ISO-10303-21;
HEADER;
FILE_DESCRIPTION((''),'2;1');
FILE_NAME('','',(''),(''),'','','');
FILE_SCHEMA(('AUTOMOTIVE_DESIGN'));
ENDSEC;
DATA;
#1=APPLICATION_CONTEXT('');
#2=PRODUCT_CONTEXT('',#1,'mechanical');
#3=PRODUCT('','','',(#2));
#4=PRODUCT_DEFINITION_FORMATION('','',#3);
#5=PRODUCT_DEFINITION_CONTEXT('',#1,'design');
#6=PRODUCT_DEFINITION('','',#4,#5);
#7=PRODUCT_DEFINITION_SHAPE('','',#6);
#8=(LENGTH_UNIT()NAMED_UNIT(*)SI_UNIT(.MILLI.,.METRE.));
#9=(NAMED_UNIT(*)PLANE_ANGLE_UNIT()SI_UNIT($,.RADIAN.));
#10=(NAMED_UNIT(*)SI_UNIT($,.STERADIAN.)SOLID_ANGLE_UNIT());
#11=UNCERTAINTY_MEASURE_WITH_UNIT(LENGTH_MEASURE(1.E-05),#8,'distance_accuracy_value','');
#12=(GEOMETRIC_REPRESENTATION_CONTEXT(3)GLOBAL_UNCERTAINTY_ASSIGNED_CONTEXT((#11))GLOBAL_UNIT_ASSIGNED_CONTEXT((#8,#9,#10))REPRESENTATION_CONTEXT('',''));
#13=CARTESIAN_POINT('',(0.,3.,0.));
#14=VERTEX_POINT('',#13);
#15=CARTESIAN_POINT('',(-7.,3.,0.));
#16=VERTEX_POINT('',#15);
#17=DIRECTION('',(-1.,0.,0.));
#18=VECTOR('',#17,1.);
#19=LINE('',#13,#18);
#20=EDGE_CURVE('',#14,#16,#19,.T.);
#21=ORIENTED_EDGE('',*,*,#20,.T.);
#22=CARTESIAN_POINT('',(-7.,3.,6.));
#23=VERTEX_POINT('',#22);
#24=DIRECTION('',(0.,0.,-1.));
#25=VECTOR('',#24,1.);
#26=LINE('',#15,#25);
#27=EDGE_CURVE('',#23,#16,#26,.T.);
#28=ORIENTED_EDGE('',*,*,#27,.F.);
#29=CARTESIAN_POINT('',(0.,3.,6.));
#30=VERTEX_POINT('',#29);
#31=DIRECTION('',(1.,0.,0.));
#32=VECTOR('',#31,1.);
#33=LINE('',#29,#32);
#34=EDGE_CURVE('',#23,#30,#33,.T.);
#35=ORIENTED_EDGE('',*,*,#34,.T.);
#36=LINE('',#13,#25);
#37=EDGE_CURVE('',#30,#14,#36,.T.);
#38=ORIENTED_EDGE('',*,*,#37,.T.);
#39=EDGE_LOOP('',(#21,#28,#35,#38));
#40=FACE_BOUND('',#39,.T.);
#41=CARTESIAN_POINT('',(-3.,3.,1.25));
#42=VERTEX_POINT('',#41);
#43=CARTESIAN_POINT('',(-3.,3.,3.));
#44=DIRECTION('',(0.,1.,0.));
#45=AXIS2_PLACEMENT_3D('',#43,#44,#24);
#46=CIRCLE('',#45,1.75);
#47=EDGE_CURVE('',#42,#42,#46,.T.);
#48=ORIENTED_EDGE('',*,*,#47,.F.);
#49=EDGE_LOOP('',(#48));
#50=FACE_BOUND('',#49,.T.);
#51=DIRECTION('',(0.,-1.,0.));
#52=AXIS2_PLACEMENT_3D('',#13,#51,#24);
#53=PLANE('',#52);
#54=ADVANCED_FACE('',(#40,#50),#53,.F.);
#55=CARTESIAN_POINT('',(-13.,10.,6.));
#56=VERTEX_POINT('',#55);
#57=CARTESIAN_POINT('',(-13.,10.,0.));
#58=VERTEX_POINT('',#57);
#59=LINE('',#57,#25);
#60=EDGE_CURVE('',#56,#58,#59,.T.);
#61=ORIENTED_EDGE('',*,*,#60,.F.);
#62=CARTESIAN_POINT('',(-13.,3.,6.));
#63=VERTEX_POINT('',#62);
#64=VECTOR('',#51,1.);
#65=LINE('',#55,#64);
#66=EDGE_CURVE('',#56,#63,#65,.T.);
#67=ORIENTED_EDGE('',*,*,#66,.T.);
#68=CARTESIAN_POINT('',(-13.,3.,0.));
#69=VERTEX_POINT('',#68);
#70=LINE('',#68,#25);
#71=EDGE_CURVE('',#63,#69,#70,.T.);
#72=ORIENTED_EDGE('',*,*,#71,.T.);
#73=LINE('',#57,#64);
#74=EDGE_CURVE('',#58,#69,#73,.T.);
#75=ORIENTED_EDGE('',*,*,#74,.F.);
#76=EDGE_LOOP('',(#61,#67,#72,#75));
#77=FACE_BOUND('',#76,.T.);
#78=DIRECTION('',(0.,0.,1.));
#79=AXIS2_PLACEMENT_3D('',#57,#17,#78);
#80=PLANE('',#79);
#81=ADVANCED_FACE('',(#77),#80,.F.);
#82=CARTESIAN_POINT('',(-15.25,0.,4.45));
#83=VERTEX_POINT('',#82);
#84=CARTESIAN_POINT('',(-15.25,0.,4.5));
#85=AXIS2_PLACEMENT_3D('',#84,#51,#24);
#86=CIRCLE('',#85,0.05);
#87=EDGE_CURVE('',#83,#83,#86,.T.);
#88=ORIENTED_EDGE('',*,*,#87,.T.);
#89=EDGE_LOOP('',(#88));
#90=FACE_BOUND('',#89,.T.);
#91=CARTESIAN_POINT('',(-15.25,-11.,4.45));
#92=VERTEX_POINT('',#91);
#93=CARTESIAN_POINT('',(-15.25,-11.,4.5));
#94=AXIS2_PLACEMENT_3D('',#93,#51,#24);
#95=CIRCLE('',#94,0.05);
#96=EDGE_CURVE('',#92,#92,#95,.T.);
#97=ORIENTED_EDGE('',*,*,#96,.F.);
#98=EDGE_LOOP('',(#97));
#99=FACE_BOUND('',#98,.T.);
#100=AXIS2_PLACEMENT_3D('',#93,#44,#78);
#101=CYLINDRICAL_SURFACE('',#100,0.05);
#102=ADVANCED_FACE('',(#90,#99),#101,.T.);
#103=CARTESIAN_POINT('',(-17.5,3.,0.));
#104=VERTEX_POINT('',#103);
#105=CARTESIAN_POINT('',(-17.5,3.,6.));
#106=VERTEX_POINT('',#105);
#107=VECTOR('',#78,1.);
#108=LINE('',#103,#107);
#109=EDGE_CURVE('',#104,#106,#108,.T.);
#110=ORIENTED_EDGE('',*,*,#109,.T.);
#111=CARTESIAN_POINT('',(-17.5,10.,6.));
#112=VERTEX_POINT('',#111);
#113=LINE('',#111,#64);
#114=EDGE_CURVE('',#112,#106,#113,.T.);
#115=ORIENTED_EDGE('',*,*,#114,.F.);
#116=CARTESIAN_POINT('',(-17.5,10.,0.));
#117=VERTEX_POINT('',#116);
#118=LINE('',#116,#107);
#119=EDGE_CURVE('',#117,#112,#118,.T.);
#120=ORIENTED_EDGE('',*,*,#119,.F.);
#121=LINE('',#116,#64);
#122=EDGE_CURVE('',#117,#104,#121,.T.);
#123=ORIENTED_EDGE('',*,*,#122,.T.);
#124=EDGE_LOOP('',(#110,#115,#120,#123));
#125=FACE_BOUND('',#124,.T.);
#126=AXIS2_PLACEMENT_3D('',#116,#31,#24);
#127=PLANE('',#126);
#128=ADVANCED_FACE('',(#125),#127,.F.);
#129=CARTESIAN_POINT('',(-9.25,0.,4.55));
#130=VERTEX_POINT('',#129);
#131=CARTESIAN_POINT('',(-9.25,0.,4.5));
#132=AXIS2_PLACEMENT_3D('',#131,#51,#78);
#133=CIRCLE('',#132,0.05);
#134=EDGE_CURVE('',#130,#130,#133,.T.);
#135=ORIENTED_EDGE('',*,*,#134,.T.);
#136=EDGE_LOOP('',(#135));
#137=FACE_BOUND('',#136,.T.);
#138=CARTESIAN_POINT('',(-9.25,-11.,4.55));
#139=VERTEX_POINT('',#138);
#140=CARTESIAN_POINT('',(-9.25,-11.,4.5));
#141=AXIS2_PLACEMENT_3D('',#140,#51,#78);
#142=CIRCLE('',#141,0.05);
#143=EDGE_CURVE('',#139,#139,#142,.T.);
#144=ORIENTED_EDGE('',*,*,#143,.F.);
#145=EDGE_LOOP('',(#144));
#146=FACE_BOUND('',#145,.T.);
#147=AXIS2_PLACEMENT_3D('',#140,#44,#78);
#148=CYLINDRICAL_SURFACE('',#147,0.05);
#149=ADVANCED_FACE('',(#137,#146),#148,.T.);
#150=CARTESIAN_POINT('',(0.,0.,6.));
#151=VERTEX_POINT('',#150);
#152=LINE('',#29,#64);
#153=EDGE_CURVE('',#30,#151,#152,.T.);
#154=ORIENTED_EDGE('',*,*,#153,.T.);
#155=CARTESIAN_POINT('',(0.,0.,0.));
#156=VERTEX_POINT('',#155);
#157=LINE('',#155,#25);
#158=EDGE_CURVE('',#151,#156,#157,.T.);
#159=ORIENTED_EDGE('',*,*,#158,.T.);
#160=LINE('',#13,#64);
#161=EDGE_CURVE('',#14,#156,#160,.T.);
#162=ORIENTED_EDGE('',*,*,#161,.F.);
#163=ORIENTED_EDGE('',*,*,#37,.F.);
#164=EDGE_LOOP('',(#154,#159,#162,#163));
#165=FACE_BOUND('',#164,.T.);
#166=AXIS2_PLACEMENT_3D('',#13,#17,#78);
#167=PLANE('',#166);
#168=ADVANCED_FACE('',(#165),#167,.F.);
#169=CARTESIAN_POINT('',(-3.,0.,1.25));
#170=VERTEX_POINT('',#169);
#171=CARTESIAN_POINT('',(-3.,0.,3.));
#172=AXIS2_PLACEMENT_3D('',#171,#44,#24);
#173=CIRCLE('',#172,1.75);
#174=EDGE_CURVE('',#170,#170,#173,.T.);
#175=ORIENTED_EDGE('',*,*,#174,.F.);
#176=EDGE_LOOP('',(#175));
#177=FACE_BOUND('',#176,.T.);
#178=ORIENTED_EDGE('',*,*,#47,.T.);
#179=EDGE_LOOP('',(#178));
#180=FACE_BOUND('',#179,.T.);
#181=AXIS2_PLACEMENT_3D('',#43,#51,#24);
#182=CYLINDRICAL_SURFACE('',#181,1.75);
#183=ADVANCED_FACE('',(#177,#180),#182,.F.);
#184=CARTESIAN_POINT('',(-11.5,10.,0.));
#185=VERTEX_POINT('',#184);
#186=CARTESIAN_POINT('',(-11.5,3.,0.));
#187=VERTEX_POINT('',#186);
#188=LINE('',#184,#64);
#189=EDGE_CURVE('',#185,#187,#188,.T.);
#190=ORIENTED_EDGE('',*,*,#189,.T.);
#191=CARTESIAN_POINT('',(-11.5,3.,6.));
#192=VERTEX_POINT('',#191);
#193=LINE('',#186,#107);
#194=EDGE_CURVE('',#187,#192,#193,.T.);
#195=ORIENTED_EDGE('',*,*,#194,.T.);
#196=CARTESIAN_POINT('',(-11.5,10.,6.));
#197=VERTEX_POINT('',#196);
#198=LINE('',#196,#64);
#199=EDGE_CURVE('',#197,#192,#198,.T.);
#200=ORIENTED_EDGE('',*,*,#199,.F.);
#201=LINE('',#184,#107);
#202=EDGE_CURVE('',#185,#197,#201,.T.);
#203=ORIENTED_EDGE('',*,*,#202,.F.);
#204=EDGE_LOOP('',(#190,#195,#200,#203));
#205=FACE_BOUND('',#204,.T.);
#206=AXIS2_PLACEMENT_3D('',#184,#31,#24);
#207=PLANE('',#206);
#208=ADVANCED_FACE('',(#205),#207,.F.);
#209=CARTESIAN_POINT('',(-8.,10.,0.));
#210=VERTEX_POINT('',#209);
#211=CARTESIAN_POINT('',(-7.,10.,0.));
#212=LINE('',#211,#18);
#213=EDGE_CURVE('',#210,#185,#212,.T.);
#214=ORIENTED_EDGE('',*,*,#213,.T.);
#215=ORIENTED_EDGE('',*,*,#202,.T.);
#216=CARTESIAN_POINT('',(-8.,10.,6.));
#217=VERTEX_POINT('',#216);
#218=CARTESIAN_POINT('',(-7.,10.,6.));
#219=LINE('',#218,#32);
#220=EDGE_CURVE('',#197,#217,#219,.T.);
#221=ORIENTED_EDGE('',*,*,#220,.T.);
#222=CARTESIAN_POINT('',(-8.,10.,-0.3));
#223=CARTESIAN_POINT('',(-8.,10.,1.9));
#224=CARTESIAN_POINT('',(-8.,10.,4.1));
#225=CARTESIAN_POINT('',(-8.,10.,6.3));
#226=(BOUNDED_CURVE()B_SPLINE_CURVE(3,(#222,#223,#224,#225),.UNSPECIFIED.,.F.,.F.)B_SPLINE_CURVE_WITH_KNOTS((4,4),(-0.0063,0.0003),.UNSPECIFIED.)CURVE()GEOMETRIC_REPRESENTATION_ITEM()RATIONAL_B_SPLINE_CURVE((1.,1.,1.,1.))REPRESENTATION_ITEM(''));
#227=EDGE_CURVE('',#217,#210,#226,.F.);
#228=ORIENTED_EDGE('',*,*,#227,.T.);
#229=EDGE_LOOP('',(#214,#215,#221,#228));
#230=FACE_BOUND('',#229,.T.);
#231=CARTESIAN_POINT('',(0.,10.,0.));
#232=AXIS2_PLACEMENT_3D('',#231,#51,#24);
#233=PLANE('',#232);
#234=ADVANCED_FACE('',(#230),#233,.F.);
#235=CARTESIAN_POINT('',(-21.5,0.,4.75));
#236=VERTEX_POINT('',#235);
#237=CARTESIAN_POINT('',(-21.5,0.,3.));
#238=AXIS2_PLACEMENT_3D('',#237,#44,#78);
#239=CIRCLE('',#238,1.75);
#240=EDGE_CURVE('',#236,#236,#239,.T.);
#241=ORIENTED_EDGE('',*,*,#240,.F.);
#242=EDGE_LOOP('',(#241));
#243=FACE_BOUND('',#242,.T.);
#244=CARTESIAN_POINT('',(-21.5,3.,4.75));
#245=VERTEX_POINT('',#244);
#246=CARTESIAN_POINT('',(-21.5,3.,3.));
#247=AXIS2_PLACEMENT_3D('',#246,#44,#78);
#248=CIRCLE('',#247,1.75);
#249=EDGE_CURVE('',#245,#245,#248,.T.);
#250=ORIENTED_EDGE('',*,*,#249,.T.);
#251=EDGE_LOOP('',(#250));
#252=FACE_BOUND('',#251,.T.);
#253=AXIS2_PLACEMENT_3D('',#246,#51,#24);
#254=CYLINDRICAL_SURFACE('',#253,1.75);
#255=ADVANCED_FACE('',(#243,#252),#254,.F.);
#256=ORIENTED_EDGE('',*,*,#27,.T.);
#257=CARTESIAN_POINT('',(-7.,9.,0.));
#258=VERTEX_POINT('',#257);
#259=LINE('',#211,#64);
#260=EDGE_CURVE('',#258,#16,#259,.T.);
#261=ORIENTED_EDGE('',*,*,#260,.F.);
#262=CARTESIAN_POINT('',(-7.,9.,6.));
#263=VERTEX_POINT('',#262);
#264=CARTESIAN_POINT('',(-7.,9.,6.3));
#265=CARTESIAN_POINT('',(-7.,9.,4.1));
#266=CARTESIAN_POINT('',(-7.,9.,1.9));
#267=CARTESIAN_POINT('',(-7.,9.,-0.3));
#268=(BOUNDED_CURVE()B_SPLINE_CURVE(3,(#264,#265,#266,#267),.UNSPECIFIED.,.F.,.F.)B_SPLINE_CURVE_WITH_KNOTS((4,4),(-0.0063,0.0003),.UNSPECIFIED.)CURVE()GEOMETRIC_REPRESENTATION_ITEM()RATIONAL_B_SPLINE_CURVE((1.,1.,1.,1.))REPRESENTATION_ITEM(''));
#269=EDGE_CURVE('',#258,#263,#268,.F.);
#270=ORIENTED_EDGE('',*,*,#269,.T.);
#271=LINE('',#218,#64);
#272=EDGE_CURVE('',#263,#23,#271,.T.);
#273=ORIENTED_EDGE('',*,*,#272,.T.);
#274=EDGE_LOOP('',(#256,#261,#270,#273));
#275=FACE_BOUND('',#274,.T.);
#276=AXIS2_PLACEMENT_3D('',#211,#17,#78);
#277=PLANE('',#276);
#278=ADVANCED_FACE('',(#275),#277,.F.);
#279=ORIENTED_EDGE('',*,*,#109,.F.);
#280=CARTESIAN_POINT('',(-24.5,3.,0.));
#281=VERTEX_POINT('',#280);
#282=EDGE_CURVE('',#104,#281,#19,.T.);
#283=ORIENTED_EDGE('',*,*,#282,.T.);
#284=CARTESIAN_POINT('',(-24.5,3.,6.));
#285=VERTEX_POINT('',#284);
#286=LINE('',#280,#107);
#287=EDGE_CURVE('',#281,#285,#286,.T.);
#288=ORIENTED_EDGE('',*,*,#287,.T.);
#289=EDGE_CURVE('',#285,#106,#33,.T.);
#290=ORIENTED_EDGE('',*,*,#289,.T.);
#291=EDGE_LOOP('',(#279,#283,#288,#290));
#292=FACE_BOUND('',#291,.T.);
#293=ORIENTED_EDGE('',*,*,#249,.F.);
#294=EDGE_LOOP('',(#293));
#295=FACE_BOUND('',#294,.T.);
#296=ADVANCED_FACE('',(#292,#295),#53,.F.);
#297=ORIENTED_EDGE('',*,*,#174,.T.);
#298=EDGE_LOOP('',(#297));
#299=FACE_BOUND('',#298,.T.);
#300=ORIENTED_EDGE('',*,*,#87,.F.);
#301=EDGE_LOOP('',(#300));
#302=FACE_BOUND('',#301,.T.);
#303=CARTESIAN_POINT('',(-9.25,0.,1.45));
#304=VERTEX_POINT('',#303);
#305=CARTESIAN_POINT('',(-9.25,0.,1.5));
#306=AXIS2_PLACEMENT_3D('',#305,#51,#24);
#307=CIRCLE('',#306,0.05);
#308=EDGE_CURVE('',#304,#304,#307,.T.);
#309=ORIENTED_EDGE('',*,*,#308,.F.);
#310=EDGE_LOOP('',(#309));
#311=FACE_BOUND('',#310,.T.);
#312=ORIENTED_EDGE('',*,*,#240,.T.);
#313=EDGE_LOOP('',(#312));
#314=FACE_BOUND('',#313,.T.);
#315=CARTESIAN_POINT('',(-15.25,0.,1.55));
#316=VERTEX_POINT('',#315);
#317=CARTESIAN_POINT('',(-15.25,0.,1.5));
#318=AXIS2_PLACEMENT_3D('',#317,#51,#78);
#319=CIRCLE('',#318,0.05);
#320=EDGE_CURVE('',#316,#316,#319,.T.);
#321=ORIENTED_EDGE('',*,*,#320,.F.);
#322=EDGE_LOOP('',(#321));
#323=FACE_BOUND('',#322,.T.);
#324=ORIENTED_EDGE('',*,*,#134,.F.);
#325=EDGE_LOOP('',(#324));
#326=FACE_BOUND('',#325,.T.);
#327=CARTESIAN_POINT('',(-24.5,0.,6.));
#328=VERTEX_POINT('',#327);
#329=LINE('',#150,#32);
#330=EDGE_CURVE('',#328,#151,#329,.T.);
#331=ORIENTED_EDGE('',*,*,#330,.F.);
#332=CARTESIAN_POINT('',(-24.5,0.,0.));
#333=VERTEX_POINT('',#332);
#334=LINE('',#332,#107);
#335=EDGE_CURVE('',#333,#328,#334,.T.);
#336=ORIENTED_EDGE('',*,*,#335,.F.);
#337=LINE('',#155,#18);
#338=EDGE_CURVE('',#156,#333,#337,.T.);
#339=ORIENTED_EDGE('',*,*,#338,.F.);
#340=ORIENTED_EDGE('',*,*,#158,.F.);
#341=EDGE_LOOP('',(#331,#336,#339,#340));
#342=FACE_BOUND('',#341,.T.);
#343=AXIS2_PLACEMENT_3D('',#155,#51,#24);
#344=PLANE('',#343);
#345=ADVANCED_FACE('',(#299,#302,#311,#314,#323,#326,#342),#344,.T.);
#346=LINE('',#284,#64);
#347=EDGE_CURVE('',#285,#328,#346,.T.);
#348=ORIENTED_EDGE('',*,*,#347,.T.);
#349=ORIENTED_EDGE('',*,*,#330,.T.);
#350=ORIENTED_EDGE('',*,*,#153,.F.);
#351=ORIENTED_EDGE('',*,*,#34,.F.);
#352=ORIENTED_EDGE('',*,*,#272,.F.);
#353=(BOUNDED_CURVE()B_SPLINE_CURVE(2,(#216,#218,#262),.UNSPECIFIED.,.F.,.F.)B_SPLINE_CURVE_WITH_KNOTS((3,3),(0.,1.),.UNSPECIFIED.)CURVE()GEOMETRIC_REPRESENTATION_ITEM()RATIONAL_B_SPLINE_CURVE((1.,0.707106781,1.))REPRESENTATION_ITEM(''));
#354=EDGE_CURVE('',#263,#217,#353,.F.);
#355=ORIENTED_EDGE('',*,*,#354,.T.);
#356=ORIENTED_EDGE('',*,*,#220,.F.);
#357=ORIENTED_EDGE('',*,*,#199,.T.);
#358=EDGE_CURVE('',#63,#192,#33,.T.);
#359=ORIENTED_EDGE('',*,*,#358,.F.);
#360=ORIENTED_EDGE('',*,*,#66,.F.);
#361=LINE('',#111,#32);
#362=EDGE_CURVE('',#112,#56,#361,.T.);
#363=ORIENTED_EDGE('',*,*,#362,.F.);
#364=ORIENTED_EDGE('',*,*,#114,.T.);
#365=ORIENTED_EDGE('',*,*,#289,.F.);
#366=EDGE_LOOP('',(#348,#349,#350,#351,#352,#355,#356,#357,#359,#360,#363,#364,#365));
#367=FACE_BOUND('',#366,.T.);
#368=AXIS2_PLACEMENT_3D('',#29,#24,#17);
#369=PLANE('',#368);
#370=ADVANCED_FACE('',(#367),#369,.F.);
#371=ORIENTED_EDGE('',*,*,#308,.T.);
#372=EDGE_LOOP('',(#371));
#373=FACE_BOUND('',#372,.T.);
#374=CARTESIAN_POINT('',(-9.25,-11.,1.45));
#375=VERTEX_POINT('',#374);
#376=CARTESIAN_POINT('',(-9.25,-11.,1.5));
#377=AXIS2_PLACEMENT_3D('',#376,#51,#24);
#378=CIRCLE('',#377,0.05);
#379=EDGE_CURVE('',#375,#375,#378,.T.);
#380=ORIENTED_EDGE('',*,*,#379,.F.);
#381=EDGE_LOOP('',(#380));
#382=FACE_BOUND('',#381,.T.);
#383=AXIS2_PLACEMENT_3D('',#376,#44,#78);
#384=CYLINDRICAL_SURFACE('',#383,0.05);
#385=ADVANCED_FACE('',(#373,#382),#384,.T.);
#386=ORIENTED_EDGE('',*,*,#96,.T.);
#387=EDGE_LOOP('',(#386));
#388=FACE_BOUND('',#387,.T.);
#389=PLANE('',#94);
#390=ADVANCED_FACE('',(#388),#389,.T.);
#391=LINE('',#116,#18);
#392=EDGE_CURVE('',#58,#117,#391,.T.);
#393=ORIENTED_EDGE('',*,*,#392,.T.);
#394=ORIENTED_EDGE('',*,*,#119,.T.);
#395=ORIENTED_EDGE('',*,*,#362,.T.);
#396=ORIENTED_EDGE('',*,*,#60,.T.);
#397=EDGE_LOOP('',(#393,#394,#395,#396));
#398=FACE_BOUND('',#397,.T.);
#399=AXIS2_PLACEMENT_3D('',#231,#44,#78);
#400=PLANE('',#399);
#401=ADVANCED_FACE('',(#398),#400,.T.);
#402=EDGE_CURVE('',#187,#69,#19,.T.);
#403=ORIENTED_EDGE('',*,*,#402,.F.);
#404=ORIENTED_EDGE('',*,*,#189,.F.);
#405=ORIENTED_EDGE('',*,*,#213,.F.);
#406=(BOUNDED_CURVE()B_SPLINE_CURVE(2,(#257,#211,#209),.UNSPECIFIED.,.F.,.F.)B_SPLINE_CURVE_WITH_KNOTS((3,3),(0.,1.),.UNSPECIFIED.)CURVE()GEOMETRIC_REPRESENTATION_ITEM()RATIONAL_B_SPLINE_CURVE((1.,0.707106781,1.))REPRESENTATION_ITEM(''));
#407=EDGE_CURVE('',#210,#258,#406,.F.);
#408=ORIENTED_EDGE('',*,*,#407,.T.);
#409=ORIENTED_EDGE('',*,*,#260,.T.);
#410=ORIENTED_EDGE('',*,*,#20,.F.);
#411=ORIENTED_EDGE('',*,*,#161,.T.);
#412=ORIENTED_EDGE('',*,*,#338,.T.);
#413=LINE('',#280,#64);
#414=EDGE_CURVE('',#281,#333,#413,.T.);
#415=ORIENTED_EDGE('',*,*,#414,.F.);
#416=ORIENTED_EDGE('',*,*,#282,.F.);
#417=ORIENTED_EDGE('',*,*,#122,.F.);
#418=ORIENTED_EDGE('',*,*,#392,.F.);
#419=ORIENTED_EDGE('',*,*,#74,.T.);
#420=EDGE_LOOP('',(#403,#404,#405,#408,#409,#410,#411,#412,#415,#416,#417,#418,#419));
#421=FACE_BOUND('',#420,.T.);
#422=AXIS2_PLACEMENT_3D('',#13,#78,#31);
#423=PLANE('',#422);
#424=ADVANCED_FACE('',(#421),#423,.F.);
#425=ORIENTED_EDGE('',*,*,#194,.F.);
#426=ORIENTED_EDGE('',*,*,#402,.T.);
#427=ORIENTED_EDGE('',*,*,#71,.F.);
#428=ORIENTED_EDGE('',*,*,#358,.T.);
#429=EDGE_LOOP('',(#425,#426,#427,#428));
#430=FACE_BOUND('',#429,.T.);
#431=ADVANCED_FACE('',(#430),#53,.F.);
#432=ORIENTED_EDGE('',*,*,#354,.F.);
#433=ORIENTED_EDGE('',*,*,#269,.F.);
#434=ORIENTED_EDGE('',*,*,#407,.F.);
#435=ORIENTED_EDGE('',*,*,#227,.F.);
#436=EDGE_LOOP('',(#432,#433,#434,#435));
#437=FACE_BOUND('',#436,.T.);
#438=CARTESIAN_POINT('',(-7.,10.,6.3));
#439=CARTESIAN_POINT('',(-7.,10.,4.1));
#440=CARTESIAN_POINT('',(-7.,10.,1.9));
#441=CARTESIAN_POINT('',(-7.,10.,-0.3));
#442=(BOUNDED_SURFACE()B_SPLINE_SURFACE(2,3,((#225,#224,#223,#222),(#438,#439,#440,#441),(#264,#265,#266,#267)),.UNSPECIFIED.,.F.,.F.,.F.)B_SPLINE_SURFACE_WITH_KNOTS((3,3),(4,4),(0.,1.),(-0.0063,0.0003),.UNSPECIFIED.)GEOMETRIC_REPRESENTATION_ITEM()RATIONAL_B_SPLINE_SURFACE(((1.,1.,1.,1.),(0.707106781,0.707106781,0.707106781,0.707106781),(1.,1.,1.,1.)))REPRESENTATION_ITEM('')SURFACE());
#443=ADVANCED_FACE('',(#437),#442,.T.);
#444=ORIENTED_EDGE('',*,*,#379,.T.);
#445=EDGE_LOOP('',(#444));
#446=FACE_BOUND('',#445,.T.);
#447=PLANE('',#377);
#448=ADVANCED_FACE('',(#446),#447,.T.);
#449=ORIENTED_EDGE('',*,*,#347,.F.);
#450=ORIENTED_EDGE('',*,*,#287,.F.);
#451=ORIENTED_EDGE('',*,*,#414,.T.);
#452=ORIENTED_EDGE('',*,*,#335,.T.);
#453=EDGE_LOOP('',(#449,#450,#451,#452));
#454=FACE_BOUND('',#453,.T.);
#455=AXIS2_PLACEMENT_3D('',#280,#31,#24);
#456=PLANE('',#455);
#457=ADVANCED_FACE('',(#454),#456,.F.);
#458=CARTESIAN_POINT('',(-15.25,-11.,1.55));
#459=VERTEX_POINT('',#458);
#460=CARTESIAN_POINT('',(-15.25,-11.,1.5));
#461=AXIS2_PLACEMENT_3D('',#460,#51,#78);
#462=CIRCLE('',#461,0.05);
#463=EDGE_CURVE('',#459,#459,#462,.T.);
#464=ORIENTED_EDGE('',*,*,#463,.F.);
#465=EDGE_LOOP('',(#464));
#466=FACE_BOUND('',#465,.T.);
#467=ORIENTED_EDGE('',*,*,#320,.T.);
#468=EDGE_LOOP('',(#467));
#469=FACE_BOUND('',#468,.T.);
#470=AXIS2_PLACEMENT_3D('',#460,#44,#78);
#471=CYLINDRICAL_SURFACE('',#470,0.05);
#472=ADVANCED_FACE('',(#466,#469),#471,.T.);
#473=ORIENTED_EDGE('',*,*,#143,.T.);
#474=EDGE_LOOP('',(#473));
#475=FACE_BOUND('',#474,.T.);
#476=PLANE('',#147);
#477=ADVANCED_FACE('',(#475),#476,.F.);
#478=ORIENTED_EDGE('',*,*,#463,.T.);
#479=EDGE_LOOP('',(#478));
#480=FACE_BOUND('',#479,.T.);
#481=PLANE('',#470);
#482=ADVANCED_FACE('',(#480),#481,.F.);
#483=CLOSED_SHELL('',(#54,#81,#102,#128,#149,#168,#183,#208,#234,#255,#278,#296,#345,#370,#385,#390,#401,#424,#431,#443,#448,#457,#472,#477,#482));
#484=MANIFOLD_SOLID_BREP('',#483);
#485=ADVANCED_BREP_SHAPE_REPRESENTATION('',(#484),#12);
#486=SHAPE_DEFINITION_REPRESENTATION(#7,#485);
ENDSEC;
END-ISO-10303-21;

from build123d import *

# Parameters (mm, degrees)
CROQUIS1_W              = 24.5
CROQUIS1_H              = 6
CROQUIS1_R              = 1.75
SALIENTE_EXTRUIR1_DEPTH = 3
CROQUIS2_W              = 4.5
CROQUIS2_H              = 6
SALIENTE_EXTRUIR2_DEPTH = 7
REDONDEO1_SIZE          = 1
CROQUIS3_R              = 0.05
SALIENTE_EXTRUIR3_DEPTH = 11


with BuildPart() as part:
    # Croquis1 → Saliente-Extruir1 (new body)
    with BuildSketch(Plane(origin=(0, 0, 0), x_dir=(1, 0, 0), z_dir=(0, 1, 0))):
        with Locations((-12.25, -3)):
            Rectangle(CROQUIS1_W, CROQUIS1_H)
        with Locations(Location((-21.5, -3, 0), (0, 0, 270))):
            Circle(CROQUIS1_R, mode=Mode.SUBTRACT)
        with Locations(Location((-3, -3, 0), (0, 0, 90))):
            Circle(CROQUIS1_R, mode=Mode.SUBTRACT)
    extrude(amount=SALIENTE_EXTRUIR1_DEPTH)

    # Croquis2 → Saliente-Extruir2 (add)
    with BuildSketch(Plane(origin=(0, 3, 0), x_dir=(1, 0, 0), z_dir=(0, 1, 0))):
        with Locations((-15.25, -3)):
            Rectangle(CROQUIS2_W, CROQUIS2_H)
        with Locations((-9.25, -3)):
            Rectangle(CROQUIS2_W, CROQUIS2_H)
    extrude(amount=SALIENTE_EXTRUIR2_DEPTH)

    # Redondeo1
    # a fillet whose section is not a circle: 1 mm, written as the material it takes off along each edge
    with BuildSketch(Plane(origin=(-7, 10, -2.5), x_dir=(0, -1, 0), z_dir=(0, 0, 1))) as redondeo1_piece_1:
        with BuildLine():
            Bezier((REDONDEO1_SIZE, 0), (0, 0), (0, -REDONDEO1_SIZE), weights=[1, 0.707106781, 1])
            Line((0, -REDONDEO1_SIZE), (0, 0))
            Line((0, 0), (REDONDEO1_SIZE, 0))
        make_face()
    extrude(amount=11, mode=Mode.SUBTRACT)

    # Croquis3 → Saliente-Extruir3 (add)
    with BuildSketch(Plane.XZ):
        with Locations(Location((-15.25, 4.5, 0), (0, 0, 270))):
            Circle(CROQUIS3_R)
        with Locations(Location((-15.25, 1.5, 0), (0, 0, 90))):
            Circle(CROQUIS3_R)
        with Locations(Location((-9.25, 4.5, 0), (0, 0, 90))):
            Circle(CROQUIS3_R)
        with Locations(Location((-9.25, 1.5, 0), (0, 0, 270))):
            Circle(CROQUIS3_R)
    extrude(amount=SALIENTE_EXTRUIR3_DEPTH)


solid = part.part
